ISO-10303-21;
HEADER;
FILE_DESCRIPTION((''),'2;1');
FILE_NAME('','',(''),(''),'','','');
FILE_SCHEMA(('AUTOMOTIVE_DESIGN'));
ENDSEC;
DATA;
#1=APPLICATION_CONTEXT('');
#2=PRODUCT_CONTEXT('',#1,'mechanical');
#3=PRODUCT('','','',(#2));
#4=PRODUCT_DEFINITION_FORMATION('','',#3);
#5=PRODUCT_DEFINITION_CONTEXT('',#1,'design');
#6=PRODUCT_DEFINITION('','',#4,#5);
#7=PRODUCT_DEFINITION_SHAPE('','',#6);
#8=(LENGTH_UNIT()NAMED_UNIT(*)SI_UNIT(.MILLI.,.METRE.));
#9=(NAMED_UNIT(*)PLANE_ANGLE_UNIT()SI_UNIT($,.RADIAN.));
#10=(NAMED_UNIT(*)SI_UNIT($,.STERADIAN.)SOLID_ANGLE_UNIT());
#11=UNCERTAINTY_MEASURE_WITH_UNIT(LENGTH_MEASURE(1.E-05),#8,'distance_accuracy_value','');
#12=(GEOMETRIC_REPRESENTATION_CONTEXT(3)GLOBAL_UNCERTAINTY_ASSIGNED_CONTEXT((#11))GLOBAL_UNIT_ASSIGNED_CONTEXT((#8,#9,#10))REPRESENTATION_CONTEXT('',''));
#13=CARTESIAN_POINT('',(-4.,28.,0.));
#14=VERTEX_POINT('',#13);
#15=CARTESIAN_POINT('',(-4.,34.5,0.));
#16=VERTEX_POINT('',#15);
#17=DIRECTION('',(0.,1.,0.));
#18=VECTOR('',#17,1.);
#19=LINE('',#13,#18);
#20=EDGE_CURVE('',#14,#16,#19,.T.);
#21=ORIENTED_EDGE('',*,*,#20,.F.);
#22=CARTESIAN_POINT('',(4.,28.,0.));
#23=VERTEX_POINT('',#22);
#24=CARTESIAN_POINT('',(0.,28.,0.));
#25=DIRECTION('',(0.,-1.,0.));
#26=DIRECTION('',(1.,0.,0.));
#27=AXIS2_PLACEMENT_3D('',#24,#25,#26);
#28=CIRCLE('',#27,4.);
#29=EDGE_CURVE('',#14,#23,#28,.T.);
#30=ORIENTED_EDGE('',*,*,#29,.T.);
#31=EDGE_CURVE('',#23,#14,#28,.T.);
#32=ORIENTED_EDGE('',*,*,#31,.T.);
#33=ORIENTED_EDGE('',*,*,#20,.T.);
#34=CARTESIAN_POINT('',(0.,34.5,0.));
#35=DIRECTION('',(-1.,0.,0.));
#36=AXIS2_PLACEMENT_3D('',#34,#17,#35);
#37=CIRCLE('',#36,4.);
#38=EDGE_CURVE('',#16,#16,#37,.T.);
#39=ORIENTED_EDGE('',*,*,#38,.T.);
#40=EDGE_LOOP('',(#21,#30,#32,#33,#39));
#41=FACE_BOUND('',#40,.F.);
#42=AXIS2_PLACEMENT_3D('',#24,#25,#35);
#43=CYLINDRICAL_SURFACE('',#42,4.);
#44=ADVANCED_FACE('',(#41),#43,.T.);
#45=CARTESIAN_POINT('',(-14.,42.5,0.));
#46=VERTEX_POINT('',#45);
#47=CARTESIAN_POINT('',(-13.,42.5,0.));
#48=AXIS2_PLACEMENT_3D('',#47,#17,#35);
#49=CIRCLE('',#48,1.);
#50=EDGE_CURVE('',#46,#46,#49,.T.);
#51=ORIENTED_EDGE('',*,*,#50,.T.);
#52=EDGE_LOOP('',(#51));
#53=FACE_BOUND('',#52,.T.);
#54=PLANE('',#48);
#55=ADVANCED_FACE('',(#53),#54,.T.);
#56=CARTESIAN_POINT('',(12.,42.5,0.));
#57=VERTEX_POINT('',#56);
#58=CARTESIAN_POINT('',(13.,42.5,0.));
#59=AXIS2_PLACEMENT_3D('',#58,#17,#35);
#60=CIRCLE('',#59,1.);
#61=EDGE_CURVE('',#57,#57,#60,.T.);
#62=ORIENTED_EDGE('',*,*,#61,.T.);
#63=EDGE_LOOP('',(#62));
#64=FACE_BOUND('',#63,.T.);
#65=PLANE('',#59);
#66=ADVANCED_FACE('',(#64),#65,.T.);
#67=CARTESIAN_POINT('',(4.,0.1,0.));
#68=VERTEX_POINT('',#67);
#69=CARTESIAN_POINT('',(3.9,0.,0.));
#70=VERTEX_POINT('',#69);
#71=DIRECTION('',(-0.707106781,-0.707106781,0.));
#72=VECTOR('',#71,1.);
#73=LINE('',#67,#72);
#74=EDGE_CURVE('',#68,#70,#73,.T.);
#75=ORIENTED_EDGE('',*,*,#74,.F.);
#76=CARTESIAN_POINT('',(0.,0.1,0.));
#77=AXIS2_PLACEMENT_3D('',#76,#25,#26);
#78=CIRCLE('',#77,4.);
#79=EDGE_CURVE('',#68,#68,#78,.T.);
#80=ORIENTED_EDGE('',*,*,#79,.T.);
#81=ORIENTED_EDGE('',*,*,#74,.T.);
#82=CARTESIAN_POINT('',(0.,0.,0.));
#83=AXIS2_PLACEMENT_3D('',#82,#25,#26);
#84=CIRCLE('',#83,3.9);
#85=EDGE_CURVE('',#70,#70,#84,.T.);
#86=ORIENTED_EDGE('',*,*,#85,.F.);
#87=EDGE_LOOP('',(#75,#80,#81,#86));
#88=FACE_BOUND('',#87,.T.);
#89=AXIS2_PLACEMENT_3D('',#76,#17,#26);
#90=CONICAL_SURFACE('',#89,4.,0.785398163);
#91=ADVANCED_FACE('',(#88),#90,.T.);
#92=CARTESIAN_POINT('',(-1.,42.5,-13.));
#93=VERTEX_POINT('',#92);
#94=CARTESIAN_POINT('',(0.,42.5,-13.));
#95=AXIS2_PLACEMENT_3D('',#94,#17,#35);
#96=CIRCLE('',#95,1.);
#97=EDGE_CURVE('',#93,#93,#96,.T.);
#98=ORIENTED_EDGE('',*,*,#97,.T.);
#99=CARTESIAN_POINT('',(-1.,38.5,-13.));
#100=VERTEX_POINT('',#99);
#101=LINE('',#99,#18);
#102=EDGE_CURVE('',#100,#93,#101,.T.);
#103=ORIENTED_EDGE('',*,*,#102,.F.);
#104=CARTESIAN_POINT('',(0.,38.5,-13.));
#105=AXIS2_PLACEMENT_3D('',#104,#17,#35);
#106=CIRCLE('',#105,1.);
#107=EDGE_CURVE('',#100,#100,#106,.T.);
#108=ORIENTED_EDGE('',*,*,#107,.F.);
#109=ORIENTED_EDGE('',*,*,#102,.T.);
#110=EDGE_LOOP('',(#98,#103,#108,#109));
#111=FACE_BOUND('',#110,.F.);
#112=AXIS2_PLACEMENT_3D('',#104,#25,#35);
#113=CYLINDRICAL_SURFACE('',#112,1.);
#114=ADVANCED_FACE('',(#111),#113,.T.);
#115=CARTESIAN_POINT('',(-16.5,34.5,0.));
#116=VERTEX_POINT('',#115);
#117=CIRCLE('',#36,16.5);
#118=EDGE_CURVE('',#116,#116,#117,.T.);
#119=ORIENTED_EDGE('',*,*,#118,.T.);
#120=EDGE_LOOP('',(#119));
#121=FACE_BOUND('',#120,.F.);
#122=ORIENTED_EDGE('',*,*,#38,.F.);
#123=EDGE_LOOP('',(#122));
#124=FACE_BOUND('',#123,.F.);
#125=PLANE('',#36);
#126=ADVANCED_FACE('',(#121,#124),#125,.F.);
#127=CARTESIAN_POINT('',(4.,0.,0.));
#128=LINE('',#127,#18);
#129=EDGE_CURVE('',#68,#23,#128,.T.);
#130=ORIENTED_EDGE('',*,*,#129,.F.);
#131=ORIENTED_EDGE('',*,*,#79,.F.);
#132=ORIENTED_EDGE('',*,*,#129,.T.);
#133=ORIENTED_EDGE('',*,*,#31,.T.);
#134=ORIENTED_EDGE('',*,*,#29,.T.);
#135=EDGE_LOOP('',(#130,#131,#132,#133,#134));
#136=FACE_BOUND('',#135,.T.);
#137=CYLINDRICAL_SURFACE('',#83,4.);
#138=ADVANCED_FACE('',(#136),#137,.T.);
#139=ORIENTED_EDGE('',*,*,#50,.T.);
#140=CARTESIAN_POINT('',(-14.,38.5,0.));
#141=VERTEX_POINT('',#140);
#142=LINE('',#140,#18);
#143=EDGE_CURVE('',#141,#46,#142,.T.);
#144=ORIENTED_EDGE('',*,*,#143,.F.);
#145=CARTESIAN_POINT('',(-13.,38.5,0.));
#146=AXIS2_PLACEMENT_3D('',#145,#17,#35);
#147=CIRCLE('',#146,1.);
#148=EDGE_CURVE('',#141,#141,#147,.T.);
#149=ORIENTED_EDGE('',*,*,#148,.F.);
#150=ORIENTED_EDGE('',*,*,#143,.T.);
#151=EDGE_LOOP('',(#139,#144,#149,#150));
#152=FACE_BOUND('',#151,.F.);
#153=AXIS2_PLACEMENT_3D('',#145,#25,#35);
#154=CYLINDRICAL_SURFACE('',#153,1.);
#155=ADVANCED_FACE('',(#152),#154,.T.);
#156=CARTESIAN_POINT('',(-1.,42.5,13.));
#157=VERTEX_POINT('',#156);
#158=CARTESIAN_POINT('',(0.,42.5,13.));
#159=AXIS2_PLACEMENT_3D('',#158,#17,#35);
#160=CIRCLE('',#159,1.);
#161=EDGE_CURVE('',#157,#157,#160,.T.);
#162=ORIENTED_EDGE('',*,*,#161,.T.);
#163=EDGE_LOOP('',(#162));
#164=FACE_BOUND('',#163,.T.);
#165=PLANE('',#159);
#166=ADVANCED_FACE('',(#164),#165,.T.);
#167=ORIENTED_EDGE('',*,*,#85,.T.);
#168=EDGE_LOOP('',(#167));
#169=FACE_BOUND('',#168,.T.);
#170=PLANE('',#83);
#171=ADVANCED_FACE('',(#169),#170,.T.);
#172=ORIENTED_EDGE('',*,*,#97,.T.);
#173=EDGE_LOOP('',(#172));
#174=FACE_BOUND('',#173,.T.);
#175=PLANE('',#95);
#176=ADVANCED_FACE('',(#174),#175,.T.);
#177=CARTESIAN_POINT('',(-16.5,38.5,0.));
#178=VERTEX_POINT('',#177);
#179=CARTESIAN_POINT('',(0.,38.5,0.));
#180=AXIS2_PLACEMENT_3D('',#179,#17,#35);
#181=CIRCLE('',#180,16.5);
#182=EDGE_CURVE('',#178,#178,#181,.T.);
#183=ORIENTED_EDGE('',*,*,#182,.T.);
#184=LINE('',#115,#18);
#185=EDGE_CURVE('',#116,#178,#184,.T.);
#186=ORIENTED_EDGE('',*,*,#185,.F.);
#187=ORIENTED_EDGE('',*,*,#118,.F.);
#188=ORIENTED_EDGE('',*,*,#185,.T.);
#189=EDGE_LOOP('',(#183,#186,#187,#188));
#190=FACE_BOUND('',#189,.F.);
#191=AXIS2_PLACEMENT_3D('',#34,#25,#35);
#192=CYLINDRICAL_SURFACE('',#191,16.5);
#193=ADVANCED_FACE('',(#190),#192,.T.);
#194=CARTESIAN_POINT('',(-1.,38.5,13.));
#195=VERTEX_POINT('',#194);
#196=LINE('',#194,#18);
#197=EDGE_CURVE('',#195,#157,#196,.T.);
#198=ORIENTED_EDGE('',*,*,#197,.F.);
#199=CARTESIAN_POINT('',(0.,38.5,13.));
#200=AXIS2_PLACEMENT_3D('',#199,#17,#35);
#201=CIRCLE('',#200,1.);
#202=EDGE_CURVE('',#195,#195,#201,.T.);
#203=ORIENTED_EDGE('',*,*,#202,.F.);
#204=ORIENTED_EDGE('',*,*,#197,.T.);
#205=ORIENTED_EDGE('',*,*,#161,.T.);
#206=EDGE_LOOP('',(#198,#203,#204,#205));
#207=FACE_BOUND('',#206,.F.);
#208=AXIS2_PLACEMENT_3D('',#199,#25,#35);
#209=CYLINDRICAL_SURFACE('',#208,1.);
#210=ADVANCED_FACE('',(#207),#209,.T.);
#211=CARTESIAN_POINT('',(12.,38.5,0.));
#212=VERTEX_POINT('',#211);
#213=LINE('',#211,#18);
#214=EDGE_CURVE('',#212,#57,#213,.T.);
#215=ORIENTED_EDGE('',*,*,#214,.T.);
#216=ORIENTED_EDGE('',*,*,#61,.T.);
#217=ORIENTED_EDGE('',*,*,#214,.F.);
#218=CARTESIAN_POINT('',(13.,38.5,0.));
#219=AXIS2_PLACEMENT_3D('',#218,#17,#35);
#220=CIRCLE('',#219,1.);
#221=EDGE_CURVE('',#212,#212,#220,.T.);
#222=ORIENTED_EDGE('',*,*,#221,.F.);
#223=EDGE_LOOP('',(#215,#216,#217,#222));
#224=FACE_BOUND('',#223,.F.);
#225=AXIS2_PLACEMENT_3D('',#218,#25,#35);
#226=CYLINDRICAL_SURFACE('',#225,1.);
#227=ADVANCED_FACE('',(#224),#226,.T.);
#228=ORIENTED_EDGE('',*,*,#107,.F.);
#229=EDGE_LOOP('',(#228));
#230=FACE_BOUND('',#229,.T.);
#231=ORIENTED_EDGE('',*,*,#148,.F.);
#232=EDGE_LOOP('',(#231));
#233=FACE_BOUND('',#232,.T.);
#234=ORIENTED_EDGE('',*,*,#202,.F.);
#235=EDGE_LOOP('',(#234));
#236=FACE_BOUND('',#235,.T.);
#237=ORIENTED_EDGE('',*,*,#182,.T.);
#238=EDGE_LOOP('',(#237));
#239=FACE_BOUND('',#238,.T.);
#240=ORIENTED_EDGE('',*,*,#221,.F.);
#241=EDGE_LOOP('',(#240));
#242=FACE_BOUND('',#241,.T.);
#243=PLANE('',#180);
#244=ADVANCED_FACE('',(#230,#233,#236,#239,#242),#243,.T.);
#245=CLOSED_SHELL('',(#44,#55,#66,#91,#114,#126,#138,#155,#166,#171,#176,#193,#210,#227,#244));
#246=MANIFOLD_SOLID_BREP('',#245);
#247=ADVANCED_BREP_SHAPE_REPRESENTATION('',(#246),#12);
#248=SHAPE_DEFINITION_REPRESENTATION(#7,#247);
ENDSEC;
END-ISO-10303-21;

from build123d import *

# Parameters (mm, degrees)
F0_R     = 4
F1_DEPTH = 28
F2_SIZE  = 0.1
F3_R     = 4
F4_DEPTH = 6.5
F5_R     = 16.5
F6_DEPTH = 4
F7_R     = 1
F8_DEPTH = 4


with BuildPart() as f1:
    # F0 (on Front) → F1 (new body)
    with BuildSketch(Plane.XZ):
        Circle(F0_R)
    extrude(amount=-F1_DEPTH)

    # F2
    f2_edges = [f1.edges().sort_by_distance(p)[0] for p in [
        (-4, 0, 0),
    ]]
    chamfer(f2_edges, length=F2_SIZE)

    # F3 (on face) → F4 (join)
    with BuildSketch(Plane(origin=(0, 28, 0), x_dir=(-1, 0, 0), z_dir=(0, 1, 0))):
        Circle(F3_R)
    extrude(amount=F4_DEPTH)

    # F5 (on face) → F6 (join)
    with BuildSketch(Plane(origin=(0, 34.5, 0), x_dir=(-1, 0, 0), z_dir=(0, 1, 0))):
        Circle(F5_R)
    extrude(amount=F6_DEPTH)

    # F7 (on face) → F8 (join)
    with BuildSketch(Plane(origin=(0, 38.5, 0), x_dir=(-1, 0, 0), z_dir=(0, 1, 0))):
        with Locations((0, 13)):
            Circle(F7_R)
        with Locations((-13, 0)):
            Circle(F7_R)
        with Locations((0, -13)):
            Circle(F7_R)
        with Locations((13, 0)):
            Circle(F7_R)
    extrude(amount=F8_DEPTH)


solid = f1.part
